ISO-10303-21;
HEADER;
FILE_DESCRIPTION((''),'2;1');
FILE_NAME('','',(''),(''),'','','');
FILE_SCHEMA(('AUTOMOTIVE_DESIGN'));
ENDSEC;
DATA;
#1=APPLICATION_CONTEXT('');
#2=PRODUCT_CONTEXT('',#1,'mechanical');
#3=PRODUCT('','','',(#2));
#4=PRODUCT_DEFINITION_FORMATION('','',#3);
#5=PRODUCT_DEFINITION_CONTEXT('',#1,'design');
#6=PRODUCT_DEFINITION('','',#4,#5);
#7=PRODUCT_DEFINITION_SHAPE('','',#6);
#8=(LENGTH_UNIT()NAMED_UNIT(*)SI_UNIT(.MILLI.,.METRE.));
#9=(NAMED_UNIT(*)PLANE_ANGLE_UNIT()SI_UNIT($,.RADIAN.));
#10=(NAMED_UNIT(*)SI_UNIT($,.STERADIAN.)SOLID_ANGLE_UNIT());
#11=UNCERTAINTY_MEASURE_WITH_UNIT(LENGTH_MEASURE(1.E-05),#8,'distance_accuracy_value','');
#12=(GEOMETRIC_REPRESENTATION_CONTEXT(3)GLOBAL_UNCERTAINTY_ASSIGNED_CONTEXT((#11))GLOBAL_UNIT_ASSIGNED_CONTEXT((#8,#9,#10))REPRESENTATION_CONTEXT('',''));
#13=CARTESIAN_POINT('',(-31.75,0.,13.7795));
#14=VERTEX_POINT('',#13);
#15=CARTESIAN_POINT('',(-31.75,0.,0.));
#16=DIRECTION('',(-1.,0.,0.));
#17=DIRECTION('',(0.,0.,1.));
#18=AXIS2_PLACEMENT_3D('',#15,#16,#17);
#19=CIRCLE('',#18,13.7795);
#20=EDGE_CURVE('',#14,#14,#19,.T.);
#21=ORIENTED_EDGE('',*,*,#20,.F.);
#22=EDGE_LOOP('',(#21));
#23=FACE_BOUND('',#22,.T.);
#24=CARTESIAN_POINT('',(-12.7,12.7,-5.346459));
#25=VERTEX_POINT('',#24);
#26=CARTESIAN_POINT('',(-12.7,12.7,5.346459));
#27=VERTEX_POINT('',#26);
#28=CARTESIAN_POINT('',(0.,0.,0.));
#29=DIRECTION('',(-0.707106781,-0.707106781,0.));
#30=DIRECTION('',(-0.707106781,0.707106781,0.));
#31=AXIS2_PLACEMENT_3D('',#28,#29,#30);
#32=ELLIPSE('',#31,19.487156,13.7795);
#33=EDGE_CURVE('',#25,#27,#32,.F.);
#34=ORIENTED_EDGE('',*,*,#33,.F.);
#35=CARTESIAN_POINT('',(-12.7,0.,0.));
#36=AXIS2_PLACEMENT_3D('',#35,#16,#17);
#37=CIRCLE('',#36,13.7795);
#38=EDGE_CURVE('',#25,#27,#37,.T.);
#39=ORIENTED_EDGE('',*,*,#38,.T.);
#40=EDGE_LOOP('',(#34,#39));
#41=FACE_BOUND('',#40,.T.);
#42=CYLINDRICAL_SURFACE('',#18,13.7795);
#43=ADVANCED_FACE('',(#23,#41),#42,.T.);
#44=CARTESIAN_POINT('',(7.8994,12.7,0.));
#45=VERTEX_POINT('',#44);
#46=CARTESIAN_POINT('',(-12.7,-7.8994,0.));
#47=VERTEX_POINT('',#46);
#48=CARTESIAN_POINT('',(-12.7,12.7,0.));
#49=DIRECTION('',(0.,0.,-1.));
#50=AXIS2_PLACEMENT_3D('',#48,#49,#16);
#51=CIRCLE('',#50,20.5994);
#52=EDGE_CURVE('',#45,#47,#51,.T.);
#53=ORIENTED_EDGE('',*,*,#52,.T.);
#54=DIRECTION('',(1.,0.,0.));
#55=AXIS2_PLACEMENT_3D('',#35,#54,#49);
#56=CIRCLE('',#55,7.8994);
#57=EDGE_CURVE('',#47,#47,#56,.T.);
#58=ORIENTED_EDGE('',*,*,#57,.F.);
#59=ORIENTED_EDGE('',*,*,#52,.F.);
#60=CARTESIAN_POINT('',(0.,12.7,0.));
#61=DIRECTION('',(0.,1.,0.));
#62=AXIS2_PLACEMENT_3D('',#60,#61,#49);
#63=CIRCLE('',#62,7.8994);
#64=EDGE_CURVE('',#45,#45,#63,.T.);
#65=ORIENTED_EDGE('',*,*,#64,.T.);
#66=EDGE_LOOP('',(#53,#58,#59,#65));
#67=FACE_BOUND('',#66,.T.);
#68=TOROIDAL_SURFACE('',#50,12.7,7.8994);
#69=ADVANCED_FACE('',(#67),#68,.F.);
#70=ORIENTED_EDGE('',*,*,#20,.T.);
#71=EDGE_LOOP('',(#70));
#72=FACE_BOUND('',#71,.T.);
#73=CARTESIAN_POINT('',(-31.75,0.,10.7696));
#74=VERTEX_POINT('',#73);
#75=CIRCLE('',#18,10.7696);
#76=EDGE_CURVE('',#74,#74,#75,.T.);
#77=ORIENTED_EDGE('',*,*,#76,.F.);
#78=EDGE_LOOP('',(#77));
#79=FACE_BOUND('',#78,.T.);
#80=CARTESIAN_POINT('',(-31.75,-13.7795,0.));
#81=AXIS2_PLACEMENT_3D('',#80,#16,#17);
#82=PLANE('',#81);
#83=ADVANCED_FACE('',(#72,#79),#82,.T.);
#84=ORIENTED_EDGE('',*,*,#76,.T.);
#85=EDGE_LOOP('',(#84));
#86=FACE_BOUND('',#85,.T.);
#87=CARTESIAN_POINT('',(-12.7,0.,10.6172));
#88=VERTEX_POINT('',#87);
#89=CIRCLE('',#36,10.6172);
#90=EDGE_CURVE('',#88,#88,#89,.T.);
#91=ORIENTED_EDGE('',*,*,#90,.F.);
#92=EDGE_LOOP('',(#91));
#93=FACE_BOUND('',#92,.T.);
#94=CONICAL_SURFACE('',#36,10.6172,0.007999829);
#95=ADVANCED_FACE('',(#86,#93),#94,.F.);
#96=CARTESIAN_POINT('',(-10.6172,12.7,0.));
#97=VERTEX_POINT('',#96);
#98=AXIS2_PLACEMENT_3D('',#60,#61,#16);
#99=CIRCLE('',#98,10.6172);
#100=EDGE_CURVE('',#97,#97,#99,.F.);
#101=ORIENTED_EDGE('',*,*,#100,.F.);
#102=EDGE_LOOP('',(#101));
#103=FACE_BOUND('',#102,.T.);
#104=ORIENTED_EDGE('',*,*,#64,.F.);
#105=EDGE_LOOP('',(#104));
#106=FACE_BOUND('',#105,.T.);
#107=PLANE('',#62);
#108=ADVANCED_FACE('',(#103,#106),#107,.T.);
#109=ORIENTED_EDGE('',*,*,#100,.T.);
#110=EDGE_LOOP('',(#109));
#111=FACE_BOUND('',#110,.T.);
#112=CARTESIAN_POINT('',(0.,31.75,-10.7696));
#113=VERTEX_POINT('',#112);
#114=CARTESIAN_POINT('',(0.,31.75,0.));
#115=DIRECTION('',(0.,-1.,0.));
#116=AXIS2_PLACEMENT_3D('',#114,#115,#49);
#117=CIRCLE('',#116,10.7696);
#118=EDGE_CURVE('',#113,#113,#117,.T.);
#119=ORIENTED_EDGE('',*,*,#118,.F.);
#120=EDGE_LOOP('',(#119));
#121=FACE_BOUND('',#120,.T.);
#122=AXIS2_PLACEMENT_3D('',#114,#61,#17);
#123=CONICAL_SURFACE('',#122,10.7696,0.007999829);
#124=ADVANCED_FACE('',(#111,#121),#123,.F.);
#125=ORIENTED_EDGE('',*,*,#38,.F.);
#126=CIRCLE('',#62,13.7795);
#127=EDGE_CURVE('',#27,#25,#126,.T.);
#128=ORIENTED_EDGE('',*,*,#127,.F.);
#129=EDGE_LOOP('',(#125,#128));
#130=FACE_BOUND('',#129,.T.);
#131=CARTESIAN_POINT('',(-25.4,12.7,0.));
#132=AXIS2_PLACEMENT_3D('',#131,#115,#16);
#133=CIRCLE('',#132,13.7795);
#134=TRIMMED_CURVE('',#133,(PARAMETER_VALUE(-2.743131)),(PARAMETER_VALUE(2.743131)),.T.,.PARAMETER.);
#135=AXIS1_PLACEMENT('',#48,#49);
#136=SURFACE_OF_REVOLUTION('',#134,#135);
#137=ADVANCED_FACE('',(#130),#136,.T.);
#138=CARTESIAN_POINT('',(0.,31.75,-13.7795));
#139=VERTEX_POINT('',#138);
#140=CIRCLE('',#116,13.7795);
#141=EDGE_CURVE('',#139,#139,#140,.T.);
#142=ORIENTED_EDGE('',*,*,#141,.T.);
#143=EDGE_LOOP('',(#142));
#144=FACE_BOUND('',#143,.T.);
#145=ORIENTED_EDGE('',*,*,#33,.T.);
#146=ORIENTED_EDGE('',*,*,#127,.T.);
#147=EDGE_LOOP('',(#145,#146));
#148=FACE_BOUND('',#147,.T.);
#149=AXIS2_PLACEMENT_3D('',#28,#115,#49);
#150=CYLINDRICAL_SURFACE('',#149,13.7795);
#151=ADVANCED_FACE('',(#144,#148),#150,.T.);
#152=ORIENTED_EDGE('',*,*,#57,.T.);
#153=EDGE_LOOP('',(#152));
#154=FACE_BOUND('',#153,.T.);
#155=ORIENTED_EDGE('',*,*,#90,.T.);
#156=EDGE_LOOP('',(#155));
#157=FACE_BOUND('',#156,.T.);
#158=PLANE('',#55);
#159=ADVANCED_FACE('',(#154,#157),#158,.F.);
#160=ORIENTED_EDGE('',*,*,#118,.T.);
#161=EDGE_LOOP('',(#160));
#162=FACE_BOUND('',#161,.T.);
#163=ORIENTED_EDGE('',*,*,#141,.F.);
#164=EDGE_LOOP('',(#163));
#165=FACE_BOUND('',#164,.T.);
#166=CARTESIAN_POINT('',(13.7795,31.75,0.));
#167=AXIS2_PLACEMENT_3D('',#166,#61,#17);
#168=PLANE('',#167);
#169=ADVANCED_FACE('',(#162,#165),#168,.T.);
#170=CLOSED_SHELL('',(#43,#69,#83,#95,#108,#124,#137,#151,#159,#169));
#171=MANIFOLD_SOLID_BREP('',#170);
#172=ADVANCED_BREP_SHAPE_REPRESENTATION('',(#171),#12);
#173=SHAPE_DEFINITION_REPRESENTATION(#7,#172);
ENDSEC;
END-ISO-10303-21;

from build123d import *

# Parameters (mm, degrees)
SKETCH3_R   = 13.7795
SKETCH3_R_2 = 7.8994


with BuildPart() as part:
    # Sketch1 → Revolve1 (revolve)
    with BuildSketch(Plane.XY):
        Polygon((-31.75, -13.7795), (-12.7, -13.7795), (-12.7, -10.6172), (-31.75, -10.7696), align=None)
    revolve(axis=Axis((-31.75, 0, 0), (1, 0, 0)))


with BuildPart() as body_2:
    # Sketch2 → Revolve2 (revolve)
    with BuildSketch(Plane.XY):
        Polygon((10.7696, 31.75), (10.6172, 12.7), (13.7795, 12.7), (13.7795, 31.75), align=None)
    revolve(axis=Axis((0, 0, 0), (0, 1, 0)))


with BuildPart() as sweep1_tool:
    # Sweep1: sweep along a path in Sketch4
    with BuildLine(Plane.XY) as sweep1_path:
        ThreePointArc((-12.7, 0), (-3.719744, 3.719744), (0, 12.7))
    # Sketch3 → Sweep1 (sweep)
    with BuildSketch(Plane(origin=(-12.7, 0, 0), x_dir=(0, 0, -1), z_dir=(1, 0, 0))):
        Circle(SKETCH3_R)
        Circle(SKETCH3_R_2, mode=Mode.SUBTRACT)
    sweep(path=sweep1_path.line)


with BuildPart() as part_1:
    add(part.part)


with BuildPart() as part_2:
    # Sweep1: joined with sweep1_tool
    add(part_1.part.fuse(sweep1_tool.part, body_2.part, tol=0.00001))


solid = part_2.part
